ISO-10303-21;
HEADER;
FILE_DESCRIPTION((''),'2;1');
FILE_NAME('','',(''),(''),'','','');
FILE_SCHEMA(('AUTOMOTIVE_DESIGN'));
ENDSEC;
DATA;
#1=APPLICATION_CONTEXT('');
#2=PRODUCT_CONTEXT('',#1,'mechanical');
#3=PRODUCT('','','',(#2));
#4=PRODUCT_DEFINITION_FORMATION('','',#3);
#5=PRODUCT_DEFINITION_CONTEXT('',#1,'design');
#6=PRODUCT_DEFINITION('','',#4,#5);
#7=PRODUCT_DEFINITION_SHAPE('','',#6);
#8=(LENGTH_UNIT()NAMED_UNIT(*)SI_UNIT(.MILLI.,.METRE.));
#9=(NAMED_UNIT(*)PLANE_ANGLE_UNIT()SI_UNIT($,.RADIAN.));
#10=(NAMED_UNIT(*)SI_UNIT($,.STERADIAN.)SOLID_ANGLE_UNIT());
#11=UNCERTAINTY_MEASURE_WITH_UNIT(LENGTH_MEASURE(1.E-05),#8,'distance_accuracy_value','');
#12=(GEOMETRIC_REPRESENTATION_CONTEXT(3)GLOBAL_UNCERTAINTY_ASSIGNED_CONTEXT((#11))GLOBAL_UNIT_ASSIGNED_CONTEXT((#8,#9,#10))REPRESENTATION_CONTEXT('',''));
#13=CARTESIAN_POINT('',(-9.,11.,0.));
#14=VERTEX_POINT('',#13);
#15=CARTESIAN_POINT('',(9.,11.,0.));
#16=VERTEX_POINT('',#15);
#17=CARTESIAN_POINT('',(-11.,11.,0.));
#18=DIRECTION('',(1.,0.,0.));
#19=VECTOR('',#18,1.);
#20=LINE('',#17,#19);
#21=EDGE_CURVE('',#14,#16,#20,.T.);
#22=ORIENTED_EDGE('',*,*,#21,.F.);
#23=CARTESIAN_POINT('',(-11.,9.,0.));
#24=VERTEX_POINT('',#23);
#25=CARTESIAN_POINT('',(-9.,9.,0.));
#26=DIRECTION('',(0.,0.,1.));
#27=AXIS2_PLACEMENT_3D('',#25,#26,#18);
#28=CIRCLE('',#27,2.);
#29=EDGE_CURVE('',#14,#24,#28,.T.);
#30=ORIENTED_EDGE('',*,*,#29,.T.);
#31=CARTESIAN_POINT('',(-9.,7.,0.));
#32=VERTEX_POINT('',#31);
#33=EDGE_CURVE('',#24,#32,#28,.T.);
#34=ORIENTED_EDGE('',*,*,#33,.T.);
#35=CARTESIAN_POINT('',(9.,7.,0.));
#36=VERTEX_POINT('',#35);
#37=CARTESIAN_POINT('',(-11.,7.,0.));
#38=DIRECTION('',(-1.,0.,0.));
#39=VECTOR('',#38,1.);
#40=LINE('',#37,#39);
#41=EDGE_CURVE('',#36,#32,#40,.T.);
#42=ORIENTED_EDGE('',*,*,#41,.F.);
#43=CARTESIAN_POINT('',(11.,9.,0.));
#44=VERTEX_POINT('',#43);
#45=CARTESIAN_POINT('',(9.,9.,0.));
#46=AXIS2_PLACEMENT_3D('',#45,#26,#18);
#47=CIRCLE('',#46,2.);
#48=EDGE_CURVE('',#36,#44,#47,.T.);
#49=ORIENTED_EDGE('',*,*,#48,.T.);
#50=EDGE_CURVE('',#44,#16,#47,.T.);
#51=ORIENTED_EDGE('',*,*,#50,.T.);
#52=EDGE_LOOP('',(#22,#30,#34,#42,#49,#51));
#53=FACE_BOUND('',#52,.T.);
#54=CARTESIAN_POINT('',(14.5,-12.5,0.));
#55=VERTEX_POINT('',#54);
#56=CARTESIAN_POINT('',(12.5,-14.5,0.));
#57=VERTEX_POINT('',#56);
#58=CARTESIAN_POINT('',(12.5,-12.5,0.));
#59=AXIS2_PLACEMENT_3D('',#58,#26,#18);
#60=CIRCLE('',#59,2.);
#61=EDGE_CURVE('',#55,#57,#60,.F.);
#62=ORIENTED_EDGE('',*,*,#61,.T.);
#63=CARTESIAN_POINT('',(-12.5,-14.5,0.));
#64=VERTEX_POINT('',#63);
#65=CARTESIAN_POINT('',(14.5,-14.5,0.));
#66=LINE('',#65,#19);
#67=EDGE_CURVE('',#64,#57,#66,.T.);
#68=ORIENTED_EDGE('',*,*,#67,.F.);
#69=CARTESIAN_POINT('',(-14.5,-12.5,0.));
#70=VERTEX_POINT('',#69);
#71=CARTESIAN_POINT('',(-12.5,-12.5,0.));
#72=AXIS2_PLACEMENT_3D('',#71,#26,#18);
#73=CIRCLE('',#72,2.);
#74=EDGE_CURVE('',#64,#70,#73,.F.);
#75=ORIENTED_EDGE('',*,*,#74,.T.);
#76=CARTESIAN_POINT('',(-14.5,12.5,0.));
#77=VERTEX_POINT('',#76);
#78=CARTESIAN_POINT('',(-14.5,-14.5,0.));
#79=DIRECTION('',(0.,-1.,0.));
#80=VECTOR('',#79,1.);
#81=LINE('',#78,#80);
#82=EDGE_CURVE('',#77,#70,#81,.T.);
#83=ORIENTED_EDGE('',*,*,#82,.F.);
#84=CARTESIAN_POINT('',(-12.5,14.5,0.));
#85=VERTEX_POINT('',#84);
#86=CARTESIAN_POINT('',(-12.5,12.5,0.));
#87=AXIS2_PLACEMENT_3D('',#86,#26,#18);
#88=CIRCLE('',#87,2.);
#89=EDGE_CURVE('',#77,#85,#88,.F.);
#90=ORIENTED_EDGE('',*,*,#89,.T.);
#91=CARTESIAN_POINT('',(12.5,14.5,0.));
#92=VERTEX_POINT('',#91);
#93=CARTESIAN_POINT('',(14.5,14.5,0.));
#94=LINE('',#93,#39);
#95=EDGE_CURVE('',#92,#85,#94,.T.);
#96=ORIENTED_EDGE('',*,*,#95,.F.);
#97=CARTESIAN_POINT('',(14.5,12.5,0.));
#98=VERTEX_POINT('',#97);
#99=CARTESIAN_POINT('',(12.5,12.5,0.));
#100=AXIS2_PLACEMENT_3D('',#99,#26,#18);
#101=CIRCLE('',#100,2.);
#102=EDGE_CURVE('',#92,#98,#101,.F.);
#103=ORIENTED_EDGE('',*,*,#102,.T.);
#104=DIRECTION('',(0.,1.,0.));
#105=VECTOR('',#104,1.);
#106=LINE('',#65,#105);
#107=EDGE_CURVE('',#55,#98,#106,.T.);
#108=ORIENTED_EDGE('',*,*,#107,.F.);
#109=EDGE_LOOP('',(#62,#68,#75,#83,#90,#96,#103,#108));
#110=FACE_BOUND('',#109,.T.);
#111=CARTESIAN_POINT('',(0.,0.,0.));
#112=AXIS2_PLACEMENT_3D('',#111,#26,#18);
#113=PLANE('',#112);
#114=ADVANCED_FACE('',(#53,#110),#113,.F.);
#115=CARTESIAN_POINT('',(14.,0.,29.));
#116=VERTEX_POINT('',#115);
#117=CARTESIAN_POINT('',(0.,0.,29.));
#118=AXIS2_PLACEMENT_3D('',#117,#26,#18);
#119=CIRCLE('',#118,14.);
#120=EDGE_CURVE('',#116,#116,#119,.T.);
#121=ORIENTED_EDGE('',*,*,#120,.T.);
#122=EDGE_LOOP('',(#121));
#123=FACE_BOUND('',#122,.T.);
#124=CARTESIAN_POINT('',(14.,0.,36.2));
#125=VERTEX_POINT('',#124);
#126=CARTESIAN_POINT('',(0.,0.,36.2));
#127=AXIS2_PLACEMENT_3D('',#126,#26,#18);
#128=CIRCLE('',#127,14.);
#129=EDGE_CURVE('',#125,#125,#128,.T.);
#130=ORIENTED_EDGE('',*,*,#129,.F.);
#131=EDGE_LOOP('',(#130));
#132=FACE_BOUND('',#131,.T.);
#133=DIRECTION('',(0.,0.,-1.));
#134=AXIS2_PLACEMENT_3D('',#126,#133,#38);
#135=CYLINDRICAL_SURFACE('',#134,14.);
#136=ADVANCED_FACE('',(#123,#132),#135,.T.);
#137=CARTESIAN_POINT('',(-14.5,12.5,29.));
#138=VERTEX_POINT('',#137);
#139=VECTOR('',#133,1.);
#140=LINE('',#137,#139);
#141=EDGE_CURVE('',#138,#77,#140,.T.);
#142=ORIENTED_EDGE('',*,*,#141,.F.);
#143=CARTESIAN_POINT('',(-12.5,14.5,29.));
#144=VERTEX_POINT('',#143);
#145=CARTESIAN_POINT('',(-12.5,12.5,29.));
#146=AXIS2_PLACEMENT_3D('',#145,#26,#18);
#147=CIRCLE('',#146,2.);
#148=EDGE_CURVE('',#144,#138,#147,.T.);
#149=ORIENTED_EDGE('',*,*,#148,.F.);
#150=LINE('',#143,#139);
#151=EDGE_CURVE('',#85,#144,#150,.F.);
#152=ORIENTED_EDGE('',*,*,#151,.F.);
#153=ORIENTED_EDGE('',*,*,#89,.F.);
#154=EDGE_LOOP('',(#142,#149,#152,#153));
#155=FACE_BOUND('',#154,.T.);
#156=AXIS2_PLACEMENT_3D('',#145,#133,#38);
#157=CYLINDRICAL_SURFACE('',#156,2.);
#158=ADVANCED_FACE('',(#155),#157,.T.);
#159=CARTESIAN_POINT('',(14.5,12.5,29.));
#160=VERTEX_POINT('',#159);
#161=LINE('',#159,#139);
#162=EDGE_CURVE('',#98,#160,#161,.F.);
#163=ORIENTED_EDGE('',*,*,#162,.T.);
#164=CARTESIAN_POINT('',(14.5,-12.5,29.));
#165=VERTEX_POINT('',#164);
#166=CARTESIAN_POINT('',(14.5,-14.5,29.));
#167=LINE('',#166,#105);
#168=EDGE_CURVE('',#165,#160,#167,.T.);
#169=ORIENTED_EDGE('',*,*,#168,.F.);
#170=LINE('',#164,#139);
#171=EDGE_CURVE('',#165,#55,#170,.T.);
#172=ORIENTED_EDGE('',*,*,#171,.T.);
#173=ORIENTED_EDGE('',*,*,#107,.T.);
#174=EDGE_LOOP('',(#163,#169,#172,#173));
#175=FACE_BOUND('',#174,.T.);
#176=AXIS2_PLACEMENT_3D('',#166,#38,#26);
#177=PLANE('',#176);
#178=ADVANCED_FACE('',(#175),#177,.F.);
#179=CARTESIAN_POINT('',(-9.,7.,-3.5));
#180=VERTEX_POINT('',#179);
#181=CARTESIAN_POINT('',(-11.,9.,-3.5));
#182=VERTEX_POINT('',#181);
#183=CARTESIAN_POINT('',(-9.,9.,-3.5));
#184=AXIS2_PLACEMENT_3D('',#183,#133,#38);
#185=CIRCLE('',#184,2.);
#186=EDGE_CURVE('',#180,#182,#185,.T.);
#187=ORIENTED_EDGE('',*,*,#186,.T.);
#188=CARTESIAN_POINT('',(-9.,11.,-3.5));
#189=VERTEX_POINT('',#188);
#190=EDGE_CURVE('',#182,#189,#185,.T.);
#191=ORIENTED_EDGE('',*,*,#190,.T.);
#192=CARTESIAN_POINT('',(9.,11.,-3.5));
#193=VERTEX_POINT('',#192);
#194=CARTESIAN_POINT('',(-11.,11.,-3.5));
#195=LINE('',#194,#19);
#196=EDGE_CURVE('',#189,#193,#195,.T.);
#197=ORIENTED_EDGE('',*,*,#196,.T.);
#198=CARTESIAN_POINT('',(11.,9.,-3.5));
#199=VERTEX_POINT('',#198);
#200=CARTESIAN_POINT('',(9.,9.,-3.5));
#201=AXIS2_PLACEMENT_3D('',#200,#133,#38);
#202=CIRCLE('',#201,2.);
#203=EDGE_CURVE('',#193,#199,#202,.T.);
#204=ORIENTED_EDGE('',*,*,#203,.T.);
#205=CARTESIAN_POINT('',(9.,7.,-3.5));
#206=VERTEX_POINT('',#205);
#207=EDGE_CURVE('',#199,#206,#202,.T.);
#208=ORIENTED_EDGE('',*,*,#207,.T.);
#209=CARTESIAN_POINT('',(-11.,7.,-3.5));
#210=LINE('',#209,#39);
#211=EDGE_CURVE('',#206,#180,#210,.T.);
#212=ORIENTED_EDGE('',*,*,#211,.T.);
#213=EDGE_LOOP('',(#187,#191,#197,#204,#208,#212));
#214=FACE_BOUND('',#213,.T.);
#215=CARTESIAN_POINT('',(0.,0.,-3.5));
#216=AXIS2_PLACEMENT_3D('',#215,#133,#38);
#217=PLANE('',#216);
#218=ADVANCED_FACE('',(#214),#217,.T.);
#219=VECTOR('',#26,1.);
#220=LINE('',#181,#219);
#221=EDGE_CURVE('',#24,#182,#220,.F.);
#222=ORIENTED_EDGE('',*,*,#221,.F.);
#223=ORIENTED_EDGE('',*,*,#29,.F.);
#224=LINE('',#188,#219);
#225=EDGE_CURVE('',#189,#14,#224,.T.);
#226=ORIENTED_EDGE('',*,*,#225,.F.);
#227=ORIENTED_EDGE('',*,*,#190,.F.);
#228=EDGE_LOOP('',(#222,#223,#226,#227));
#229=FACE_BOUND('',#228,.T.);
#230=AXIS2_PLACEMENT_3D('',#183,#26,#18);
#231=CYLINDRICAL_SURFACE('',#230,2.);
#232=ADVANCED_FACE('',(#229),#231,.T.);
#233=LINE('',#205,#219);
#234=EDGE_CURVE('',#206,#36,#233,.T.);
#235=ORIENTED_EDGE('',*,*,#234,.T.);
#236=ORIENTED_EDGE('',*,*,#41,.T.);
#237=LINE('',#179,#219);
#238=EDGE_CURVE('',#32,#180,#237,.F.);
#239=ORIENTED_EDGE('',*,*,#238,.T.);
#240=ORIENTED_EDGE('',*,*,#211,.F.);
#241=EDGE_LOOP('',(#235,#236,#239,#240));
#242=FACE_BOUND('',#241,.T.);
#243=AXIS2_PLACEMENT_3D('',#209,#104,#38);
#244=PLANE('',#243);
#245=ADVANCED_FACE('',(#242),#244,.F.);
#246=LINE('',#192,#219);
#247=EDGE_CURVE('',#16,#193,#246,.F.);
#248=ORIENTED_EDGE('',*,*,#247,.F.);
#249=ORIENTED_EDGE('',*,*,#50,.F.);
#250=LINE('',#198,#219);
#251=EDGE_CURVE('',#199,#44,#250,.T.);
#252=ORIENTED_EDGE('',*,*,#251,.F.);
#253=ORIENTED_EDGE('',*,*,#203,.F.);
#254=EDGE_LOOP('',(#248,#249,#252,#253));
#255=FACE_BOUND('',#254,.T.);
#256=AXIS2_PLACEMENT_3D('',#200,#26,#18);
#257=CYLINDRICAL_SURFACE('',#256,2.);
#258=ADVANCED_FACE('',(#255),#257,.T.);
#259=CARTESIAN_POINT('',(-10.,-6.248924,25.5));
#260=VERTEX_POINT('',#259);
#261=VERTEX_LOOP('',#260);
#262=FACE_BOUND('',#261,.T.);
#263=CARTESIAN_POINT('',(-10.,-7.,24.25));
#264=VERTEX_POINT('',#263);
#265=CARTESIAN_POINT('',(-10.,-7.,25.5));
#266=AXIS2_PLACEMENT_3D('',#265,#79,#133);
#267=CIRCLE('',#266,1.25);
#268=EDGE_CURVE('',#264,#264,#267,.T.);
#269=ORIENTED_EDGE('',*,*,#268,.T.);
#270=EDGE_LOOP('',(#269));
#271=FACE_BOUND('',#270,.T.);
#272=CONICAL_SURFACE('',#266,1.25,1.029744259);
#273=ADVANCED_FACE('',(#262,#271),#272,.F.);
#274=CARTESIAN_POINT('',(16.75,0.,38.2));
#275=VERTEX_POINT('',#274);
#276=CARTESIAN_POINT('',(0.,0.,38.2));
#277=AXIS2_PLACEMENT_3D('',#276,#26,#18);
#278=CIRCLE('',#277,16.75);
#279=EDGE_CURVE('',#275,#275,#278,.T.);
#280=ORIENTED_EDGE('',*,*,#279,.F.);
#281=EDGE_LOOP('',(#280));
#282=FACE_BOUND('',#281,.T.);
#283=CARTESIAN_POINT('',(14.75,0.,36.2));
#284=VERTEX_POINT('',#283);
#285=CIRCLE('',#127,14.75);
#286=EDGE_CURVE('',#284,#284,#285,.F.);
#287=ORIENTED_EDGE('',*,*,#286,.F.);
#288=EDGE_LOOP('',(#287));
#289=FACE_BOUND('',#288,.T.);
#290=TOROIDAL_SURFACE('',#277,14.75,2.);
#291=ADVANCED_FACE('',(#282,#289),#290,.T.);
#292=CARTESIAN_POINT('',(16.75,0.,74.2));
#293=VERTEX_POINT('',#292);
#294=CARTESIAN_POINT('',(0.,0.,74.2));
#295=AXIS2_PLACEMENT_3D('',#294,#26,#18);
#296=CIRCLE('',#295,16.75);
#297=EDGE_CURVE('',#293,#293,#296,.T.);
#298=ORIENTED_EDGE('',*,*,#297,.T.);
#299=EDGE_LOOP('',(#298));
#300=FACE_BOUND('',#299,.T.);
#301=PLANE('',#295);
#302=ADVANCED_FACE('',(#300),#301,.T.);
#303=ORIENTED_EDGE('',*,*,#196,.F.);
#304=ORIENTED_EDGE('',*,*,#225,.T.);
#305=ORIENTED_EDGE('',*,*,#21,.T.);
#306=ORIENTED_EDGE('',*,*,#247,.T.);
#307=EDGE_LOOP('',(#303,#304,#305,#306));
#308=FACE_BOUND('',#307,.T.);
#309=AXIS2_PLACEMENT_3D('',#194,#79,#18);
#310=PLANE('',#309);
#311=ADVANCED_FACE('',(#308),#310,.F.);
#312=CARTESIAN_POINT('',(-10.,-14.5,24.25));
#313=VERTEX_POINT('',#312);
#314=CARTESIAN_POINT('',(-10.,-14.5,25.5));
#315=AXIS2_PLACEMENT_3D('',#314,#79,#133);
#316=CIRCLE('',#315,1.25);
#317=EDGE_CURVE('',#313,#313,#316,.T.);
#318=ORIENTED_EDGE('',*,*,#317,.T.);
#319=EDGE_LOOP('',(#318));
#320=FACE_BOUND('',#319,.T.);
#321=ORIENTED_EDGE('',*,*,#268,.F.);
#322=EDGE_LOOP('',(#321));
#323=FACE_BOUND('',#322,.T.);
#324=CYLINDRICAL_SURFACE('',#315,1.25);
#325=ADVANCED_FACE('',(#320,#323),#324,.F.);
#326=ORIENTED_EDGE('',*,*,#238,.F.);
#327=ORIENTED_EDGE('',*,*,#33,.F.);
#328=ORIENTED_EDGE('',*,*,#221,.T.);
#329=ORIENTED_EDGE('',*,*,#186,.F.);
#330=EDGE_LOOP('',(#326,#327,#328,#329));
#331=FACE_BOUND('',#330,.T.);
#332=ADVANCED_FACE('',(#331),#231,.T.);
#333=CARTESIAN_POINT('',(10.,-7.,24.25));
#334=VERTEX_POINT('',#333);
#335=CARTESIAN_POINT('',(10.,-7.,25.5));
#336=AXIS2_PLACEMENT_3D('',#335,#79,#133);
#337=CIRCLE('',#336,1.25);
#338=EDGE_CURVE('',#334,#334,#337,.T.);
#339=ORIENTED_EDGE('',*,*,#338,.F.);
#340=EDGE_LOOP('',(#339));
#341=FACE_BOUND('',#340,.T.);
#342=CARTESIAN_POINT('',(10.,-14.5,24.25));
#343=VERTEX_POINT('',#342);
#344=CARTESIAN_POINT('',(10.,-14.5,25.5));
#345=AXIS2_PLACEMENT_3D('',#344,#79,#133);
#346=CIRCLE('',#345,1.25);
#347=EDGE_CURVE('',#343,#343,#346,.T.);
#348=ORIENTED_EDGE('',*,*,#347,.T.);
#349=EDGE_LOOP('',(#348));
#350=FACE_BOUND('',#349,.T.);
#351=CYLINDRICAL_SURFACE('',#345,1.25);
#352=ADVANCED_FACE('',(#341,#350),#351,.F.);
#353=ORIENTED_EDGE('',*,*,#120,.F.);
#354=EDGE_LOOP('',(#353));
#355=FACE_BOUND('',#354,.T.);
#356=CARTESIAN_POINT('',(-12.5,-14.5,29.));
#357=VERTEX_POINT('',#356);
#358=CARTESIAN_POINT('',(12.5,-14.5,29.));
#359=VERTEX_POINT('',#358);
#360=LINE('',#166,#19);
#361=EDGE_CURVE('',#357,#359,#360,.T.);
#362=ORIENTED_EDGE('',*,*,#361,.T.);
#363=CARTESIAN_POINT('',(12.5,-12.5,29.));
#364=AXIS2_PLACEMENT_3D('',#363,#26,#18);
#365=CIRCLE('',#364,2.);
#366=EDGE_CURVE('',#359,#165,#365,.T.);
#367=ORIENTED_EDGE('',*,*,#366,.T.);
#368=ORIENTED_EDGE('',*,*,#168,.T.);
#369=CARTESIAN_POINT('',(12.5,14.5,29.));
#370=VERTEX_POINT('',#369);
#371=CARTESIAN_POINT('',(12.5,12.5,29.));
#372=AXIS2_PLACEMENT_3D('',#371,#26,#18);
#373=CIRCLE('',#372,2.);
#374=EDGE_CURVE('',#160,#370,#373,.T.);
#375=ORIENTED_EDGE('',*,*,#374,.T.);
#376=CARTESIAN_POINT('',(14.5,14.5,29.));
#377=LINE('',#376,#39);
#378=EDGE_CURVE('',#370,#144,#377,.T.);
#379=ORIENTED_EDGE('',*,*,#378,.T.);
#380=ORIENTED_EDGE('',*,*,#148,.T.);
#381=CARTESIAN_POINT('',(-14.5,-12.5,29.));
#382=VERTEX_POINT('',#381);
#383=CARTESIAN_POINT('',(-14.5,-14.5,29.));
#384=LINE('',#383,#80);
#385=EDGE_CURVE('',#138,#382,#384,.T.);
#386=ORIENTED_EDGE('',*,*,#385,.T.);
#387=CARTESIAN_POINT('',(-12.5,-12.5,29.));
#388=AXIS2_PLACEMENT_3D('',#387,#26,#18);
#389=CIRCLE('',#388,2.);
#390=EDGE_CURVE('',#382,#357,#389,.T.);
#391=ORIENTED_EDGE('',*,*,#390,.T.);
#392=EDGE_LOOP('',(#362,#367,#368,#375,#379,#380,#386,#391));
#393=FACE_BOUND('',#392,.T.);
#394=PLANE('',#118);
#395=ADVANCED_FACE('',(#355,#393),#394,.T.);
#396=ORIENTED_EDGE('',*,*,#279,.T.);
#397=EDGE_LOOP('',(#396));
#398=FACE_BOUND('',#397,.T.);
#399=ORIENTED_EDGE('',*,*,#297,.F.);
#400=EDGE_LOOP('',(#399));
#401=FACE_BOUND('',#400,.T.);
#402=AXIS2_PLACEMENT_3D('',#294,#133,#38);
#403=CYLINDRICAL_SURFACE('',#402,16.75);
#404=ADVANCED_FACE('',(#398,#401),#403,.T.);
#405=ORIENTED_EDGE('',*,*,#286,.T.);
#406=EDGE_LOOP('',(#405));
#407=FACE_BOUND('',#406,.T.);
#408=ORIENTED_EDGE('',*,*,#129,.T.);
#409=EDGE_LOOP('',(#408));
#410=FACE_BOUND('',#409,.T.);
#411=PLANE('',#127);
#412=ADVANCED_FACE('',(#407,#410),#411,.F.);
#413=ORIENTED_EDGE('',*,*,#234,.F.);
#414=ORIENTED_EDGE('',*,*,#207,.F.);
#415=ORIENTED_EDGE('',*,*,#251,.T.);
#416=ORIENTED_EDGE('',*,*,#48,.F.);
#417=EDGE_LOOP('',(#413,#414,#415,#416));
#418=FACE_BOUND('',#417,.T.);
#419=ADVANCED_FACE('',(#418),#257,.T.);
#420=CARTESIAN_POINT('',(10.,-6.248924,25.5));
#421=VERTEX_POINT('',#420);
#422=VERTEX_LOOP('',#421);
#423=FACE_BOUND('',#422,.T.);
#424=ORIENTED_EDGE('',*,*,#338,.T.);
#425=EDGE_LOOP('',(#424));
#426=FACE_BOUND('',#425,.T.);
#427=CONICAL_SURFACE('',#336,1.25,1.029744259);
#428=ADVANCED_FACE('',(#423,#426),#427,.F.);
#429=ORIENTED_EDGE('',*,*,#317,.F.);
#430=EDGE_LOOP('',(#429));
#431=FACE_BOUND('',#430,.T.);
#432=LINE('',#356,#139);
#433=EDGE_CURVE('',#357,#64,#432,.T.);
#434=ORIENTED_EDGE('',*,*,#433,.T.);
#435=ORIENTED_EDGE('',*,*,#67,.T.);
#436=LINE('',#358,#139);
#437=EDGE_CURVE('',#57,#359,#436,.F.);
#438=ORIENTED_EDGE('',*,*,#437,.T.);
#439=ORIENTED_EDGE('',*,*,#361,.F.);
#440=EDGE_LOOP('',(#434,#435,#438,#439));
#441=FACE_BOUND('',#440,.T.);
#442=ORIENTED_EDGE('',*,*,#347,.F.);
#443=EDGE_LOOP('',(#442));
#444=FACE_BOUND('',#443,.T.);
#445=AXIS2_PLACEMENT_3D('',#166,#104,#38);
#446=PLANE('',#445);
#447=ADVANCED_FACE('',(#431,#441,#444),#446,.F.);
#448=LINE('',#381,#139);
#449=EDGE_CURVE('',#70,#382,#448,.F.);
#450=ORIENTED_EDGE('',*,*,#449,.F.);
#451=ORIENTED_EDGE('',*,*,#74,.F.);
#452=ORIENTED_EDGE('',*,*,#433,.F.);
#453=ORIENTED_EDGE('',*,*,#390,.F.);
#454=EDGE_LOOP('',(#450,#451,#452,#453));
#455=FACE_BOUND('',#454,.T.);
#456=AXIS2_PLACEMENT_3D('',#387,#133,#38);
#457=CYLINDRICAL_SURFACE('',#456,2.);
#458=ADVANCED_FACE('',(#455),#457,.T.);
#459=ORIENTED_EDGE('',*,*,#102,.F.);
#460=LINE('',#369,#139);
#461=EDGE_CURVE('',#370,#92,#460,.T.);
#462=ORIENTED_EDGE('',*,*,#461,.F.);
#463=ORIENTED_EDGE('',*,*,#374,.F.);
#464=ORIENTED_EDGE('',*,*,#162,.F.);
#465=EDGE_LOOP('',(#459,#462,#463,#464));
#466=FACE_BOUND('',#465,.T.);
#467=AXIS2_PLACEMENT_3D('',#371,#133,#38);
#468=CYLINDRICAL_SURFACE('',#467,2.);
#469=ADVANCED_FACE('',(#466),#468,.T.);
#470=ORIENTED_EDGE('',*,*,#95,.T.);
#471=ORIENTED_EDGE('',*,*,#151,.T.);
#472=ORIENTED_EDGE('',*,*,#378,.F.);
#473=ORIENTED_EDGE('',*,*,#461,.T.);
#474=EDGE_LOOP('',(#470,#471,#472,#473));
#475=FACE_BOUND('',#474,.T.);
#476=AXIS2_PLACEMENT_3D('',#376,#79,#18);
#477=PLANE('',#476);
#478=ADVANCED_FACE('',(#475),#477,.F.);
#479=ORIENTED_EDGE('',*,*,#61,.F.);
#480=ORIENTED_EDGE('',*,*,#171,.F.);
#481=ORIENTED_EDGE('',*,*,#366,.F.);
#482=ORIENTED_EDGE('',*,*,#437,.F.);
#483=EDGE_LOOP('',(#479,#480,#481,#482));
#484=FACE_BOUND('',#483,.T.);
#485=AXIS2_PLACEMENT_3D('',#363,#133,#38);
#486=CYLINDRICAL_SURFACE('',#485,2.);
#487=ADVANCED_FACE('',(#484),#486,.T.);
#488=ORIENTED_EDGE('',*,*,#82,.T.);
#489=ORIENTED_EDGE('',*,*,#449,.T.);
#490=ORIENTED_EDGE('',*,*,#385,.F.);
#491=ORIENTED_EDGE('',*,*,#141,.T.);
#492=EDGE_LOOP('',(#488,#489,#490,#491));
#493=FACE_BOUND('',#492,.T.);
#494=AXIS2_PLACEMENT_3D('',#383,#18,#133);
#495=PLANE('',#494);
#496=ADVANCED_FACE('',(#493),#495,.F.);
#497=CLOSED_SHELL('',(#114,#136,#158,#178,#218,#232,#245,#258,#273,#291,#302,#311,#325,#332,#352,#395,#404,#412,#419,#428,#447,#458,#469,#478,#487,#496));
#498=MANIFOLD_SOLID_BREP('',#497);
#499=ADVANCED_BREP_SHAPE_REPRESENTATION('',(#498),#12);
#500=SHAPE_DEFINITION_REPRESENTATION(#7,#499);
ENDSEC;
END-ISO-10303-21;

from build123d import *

# Parameters (mm, degrees)
SKETCH_1_W             = 29
SKETCH_1_H             = 29
EXTRUDE_1_DEPTH        = 29
SKETCH_2_R             = 14
EXTRUDE_2_DEPTH        = 7.2
HOLE_WIZARD_M3_1_D     = 2.5
HOLE_WIZARD_M3_1_DEPTH = 7.5
HOLE_WIZARD_M3_1_TIP   = 0.751075774
SKETCH_6_R             = 16.75
EXTRUDE_3_DEPTH        = 38
FILLET_1_R             = 2
SKETCH_7_W             = 22
SKETCH_7_H             = 4
EXTRUDE_4_DEPTH        = 3.5
FILLET_2_R             = 2


with BuildPart() as part:
    # 草图1 → 凸台-拉伸1 (new body)
    with BuildSketch(Plane.XY):
        Rectangle(SKETCH_1_W, SKETCH_1_H)
    extrude(amount=EXTRUDE_1_DEPTH)

    # 草图2 → 凸台-拉伸2 (add)
    with BuildSketch(Plane.XY.offset(29)):
        Circle(SKETCH_2_R)
    extrude(amount=EXTRUDE_2_DEPTH)

    # M3 螺纹孔1
    with Locations(Plane(origin=(0, -14.5, 0), x_dir=(-1, 0, 0), z_dir=(0, -1, 0))):
        with Locations((10, -25.5), (-10, -25.5)):
            Hole(HOLE_WIZARD_M3_1_D / 2, depth=HOLE_WIZARD_M3_1_DEPTH)
            with Locations((0, 0, -(HOLE_WIZARD_M3_1_DEPTH + HOLE_WIZARD_M3_1_TIP / 2))):  # 118° drill point
                Cone(0, HOLE_WIZARD_M3_1_D / 2, HOLE_WIZARD_M3_1_TIP, mode=Mode.SUBTRACT)

    # 草图6 → 凸台-拉伸3 (add)
    with BuildSketch(Plane.XY.offset(36.2)):
        Circle(SKETCH_6_R)
    extrude(amount=EXTRUDE_3_DEPTH)

    # 圆角1
    fillet_1_edges = [part.edges().sort_by_distance(p)[0] for p in [
        (-16.75, 0, 36.2),
        (-14.5, 14.5, 14.5),
        (14.5, 14.5, 14.5),
        (14.5, -14.5, 14.5),
        (-14.5, -14.5, 14.5),
    ]]
    fillet(fillet_1_edges, radius=FILLET_1_R)

    # 草图7 → 凸台-拉伸4 (add)
    with BuildSketch(Plane(origin=(0, 0, 0), x_dir=(-1, 0, 0), z_dir=(0, 0, -1))):
        with Locations((0, 9)):
            Rectangle(SKETCH_7_W, SKETCH_7_H)
    extrude(amount=EXTRUDE_4_DEPTH)

    # 圆角2
    fillet_2_edges = [part.edges().sort_by_distance(p)[0] for p in [
        (-11, 7, -1.75),
        (-11, 11, -1.75),
        (11, 7, -1.75),
        (11, 11, -1.75),
    ]]
    fillet(fillet_2_edges, radius=FILLET_2_R - 0.0001)  # a hair under: the kernel refuses the full size


solid = part.part
